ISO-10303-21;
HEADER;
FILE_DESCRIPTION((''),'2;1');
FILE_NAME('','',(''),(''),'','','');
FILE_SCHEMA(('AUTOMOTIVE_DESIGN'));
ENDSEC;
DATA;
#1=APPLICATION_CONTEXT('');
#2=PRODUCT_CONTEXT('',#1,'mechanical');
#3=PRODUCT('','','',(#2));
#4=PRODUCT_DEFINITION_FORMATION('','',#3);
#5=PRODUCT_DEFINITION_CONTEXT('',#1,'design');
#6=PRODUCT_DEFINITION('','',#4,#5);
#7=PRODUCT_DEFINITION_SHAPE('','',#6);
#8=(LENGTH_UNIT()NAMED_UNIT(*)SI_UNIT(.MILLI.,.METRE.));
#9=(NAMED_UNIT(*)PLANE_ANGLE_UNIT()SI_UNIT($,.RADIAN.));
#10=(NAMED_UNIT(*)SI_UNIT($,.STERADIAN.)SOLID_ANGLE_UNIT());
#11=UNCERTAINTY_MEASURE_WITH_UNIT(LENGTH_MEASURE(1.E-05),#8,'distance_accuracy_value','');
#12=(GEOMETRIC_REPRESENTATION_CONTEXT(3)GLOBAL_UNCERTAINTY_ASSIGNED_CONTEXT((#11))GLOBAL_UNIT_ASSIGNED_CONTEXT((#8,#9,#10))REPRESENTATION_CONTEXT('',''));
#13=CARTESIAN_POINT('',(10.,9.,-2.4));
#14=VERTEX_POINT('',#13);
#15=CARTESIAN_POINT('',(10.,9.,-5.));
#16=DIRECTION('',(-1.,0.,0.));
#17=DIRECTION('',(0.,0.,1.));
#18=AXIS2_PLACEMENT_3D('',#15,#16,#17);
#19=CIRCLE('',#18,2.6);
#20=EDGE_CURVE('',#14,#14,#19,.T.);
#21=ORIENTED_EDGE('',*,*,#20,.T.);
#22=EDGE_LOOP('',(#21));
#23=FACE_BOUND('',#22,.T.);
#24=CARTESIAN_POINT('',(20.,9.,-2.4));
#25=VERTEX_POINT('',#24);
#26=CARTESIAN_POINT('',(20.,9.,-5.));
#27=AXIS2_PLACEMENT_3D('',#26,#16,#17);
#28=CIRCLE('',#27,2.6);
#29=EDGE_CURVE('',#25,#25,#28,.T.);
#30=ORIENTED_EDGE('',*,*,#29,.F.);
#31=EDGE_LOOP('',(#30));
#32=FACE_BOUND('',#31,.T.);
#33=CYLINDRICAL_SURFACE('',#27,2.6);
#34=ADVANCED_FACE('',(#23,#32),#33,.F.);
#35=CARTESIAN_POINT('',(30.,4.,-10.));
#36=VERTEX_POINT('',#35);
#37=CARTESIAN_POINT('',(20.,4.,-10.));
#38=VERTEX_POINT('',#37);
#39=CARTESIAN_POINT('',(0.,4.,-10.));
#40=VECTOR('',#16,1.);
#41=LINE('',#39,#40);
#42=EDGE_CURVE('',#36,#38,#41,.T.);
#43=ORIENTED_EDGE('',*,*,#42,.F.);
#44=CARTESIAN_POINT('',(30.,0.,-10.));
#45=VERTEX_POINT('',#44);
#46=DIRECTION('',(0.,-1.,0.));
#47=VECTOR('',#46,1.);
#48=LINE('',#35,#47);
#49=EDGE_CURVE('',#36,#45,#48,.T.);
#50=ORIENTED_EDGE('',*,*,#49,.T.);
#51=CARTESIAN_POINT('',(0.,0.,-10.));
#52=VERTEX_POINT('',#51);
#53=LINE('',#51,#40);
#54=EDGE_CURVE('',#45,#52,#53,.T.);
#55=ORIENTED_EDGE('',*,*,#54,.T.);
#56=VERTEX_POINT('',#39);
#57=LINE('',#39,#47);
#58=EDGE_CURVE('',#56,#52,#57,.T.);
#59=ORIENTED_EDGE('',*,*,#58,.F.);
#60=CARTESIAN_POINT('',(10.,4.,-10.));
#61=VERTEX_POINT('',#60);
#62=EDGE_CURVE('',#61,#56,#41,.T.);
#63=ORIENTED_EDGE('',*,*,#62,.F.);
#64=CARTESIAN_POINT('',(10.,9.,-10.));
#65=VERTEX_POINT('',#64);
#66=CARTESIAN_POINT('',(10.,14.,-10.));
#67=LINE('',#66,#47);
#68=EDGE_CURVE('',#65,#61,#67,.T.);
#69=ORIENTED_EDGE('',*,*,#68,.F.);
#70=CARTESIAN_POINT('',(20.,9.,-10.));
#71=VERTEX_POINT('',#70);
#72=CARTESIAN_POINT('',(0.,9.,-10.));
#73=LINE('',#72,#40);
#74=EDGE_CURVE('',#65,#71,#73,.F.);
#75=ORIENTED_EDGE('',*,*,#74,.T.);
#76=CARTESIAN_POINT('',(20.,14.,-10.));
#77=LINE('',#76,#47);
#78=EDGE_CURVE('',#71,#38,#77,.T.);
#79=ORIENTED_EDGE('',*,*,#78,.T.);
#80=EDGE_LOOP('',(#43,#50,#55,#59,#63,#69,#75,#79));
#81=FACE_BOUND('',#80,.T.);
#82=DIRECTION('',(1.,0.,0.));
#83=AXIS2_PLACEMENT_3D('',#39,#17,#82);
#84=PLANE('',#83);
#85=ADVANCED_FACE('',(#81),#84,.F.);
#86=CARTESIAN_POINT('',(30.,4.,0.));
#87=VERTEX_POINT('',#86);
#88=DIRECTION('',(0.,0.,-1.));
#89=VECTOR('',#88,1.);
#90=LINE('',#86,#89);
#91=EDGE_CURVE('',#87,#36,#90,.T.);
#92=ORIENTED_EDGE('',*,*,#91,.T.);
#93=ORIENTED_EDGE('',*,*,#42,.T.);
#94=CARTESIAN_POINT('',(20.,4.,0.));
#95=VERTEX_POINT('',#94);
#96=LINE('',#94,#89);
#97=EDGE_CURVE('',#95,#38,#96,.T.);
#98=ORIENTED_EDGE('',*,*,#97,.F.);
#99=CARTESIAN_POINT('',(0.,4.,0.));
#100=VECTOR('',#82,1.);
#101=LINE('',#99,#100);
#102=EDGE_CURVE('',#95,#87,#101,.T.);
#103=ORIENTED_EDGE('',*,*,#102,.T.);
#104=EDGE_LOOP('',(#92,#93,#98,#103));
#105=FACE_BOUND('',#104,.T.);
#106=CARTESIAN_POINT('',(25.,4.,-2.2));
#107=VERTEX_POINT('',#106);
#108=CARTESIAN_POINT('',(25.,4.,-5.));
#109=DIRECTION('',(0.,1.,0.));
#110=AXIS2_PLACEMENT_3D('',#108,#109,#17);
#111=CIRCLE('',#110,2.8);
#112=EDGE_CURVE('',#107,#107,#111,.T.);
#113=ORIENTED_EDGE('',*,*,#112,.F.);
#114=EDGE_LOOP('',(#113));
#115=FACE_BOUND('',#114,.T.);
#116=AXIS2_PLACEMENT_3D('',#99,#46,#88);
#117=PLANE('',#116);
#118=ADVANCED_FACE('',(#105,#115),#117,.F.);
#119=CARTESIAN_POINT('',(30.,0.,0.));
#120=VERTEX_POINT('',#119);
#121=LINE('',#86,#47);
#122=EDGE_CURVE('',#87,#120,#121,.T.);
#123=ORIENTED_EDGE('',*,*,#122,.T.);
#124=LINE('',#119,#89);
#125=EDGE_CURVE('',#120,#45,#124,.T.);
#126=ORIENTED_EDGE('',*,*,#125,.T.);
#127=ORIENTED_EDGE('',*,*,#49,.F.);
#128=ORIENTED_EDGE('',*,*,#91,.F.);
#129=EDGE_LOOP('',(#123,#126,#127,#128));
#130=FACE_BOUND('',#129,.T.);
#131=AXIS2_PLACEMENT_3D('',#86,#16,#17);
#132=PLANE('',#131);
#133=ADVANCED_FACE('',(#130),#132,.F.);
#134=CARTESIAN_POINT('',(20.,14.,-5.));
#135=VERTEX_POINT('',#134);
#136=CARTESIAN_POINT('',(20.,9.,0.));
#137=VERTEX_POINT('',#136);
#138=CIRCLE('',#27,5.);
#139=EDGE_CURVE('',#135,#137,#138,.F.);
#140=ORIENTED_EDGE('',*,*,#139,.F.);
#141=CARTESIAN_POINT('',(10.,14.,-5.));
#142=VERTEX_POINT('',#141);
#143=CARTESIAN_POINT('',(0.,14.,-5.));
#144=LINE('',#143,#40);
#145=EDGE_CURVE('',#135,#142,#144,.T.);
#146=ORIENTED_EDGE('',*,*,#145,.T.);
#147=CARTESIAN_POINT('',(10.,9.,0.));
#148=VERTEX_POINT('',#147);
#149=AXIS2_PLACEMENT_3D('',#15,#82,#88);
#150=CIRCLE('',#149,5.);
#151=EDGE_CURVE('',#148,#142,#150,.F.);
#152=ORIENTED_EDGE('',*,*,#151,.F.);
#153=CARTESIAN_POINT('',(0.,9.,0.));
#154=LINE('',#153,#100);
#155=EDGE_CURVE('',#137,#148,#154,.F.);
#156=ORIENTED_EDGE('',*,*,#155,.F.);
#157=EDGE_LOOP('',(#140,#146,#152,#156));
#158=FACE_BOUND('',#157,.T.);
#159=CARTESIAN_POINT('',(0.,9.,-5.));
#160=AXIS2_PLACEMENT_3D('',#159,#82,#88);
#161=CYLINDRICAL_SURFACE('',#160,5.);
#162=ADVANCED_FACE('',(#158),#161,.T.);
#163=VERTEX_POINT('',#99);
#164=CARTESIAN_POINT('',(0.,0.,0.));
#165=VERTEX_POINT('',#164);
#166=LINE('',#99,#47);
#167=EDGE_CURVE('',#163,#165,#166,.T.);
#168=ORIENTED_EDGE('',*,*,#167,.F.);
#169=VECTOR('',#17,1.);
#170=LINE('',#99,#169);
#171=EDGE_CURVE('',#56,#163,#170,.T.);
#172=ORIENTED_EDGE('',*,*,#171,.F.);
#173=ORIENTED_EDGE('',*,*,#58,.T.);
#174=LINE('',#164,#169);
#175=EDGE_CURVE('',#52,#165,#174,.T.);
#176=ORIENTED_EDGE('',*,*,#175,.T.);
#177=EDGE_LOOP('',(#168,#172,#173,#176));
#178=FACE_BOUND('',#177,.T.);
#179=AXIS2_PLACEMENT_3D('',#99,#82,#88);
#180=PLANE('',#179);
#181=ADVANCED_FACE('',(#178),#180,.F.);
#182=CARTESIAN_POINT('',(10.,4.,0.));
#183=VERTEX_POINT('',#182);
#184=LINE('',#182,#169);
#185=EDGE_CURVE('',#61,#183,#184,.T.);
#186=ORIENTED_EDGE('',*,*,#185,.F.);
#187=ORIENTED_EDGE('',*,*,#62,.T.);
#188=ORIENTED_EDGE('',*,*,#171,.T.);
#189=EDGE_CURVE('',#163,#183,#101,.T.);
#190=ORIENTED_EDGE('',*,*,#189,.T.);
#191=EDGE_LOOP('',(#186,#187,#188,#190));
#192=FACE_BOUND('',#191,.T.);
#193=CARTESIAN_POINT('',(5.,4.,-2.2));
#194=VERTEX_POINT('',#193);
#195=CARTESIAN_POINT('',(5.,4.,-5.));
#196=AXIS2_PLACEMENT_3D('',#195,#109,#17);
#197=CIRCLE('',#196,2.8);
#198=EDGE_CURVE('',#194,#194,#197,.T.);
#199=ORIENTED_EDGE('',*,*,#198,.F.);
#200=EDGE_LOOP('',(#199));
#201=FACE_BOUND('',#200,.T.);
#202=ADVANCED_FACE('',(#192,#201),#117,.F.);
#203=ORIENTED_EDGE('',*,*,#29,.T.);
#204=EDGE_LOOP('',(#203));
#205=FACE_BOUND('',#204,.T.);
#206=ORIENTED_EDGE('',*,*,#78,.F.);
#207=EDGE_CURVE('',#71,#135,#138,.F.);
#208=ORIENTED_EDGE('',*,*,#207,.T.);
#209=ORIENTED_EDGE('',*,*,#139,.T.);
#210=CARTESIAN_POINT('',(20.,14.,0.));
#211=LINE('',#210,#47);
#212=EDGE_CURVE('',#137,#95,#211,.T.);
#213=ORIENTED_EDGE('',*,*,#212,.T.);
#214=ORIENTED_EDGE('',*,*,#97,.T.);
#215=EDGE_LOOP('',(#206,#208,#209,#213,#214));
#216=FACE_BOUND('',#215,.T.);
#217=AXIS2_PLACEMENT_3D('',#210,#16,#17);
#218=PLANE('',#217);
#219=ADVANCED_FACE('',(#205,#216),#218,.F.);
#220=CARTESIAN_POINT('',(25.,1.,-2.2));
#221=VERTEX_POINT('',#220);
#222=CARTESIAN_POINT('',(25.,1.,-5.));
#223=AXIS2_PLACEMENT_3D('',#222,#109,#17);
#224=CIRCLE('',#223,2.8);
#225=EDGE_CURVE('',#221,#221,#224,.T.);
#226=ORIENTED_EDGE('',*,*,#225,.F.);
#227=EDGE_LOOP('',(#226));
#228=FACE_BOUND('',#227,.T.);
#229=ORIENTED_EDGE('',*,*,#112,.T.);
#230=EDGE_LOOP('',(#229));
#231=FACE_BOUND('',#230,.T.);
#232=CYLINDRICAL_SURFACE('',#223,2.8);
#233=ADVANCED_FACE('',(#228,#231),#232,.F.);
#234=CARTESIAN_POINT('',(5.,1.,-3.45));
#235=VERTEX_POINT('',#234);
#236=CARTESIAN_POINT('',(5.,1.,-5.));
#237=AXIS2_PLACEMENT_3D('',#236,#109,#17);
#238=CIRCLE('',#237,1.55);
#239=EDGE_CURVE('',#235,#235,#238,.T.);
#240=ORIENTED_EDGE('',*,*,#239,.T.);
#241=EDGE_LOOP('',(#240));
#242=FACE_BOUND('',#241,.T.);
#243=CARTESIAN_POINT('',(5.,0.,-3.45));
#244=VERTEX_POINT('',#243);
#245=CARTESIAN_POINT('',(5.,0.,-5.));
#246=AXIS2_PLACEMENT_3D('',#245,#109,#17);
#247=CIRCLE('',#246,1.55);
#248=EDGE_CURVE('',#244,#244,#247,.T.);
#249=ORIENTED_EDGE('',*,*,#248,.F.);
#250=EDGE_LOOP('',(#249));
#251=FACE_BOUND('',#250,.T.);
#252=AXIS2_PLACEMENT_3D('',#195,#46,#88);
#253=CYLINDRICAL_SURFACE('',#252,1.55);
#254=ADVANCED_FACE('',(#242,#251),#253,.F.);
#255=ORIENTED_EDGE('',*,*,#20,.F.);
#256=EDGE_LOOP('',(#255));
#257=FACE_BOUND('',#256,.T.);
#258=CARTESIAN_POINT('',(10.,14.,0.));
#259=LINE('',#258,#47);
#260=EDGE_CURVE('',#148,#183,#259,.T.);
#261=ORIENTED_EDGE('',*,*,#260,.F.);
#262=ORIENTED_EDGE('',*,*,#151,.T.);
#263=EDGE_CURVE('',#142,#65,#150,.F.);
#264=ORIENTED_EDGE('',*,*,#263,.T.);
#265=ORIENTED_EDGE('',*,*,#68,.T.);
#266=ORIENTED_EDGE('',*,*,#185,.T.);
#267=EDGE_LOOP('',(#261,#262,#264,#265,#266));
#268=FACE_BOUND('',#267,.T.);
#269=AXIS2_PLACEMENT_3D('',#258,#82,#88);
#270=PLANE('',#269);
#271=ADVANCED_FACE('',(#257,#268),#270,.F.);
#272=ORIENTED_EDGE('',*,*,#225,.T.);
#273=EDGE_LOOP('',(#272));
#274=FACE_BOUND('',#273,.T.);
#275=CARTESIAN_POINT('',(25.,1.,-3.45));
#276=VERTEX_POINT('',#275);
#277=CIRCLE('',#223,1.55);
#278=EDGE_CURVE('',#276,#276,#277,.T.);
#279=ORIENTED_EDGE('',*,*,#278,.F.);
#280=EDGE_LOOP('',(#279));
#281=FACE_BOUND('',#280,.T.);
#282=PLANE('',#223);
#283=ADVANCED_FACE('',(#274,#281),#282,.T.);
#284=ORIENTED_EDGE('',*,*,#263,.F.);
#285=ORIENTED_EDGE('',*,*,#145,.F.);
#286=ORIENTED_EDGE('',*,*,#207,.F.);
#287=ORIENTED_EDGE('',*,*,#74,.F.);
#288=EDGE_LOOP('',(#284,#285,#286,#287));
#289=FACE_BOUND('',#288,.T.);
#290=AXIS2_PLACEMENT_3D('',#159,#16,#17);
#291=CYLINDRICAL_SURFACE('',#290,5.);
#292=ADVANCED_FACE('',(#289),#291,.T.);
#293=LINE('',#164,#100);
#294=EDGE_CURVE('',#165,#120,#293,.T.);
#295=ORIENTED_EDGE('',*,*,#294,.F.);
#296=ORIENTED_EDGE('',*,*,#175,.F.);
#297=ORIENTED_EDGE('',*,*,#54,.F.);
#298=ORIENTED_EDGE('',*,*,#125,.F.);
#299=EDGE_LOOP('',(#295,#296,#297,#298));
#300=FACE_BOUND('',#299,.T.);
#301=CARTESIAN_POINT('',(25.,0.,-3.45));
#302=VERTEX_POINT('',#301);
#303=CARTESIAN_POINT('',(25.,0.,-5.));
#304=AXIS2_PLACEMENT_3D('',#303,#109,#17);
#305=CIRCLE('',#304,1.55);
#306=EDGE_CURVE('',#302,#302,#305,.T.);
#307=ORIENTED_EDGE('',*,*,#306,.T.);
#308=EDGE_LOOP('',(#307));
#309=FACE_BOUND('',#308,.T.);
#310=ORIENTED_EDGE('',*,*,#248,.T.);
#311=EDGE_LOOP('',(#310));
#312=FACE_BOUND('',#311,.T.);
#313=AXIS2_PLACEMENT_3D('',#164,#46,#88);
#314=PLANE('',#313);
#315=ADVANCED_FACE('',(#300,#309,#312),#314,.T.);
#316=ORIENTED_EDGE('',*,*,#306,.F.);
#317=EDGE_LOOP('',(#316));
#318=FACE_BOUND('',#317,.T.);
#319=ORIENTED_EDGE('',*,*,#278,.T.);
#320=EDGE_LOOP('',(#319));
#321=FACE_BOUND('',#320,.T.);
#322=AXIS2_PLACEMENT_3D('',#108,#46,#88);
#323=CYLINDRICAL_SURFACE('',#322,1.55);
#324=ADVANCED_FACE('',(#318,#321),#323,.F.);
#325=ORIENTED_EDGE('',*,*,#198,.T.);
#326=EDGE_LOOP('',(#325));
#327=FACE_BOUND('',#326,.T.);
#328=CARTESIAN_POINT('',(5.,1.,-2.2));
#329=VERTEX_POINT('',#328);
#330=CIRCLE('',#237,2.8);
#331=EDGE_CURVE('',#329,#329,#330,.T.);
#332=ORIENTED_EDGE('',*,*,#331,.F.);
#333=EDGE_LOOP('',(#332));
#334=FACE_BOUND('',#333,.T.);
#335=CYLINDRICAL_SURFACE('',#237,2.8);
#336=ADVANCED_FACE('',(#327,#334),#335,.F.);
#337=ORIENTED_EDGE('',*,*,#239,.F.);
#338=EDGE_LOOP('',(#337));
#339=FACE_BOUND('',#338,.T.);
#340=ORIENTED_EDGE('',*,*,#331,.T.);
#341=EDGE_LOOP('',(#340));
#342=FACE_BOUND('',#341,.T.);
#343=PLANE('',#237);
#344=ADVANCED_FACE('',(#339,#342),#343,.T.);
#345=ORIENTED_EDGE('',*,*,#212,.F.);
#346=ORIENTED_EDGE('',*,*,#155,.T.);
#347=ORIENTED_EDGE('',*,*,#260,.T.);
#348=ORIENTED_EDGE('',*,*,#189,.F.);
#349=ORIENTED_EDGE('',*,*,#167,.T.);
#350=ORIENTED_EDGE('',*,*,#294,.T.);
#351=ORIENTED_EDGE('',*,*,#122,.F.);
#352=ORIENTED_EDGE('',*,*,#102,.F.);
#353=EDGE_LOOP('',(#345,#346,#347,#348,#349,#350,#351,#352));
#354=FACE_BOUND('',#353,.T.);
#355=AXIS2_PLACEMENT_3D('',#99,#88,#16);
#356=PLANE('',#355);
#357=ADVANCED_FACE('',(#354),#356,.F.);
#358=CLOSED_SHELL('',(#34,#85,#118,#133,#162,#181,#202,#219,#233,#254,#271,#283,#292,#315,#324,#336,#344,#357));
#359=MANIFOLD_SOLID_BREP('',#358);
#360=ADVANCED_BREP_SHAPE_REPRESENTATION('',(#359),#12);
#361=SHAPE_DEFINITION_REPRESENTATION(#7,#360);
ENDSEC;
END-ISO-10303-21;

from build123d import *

# Parameters (mm, degrees)
CROQUIS1_W              = 30
CROQUIS1_H              = 10
CROQUIS1_R              = 1.55
SALIENTE_EXTRUIR1_DEPTH = 4
CROQUIS2_R              = 2.8
CORTAR_EXTRUIR1_DEPTH   = 3
CROQUIS3_W              = 10
CROQUIS3_H              = 10
SALIENTE_EXTRUIR2_DEPTH = 10
CROQUIS4_R              = 2.6
CORTAR_EXTRUIR2_DEPTH   = 10
REDONDEO3_R             = 5


with BuildPart() as part:
    # Croquis1 → Saliente-Extruir1 (new body)
    with BuildSketch(Plane(origin=(0, 0, 0), x_dir=(1, 0, 0), z_dir=(0, 1, 0))):
        with Locations((15, 5)):
            Rectangle(CROQUIS1_W, CROQUIS1_H)
        with Locations(Location((5, 5, 0), (0, 0, 270))):
            Circle(CROQUIS1_R, mode=Mode.SUBTRACT)
        with Locations(Location((25, 5, 0), (0, 0, 270))):
            Circle(CROQUIS1_R, mode=Mode.SUBTRACT)
    extrude(amount=SALIENTE_EXTRUIR1_DEPTH)

    # Croquis2 → Cortar-Extruir1 (cut)
    with BuildSketch(Plane(origin=(0, 4, 0), x_dir=(1, 0, 0), z_dir=(0, 1, 0))):
        with Locations(Location((5, 5, 0), (0, 0, 270))):
            Circle(CROQUIS2_R)
        with Locations(Location((25, 5, 0), (0, 0, 270))):
            Circle(CROQUIS2_R)
    extrude(amount=-CORTAR_EXTRUIR1_DEPTH, mode=Mode.SUBTRACT)

    # Croquis3 → Saliente-Extruir2 (add)
    with BuildSketch(Plane(origin=(0, 4, 0), x_dir=(1, 0, 0), z_dir=(0, 1, 0))):
        with Locations((15, 5)):
            Rectangle(CROQUIS3_W, CROQUIS3_H)
    extrude(amount=SALIENTE_EXTRUIR2_DEPTH)

    # Croquis4 → Cortar-Extruir2 (cut)
    with BuildSketch(Plane.ZY.offset(-10)):
        with Locations((-5, 9)):
            Circle(CROQUIS4_R)
    extrude(amount=-CORTAR_EXTRUIR2_DEPTH, mode=Mode.SUBTRACT)

    # Redondeo3
    redondeo3_edges = [part.edges().sort_by_distance(p)[0] for p in [
        (15, 14, 0),
        (15, 14, -10),
    ]]
    fillet(redondeo3_edges, radius=REDONDEO3_R - 0.0001)  # a hair under: the kernel refuses the full size


solid = part.part
